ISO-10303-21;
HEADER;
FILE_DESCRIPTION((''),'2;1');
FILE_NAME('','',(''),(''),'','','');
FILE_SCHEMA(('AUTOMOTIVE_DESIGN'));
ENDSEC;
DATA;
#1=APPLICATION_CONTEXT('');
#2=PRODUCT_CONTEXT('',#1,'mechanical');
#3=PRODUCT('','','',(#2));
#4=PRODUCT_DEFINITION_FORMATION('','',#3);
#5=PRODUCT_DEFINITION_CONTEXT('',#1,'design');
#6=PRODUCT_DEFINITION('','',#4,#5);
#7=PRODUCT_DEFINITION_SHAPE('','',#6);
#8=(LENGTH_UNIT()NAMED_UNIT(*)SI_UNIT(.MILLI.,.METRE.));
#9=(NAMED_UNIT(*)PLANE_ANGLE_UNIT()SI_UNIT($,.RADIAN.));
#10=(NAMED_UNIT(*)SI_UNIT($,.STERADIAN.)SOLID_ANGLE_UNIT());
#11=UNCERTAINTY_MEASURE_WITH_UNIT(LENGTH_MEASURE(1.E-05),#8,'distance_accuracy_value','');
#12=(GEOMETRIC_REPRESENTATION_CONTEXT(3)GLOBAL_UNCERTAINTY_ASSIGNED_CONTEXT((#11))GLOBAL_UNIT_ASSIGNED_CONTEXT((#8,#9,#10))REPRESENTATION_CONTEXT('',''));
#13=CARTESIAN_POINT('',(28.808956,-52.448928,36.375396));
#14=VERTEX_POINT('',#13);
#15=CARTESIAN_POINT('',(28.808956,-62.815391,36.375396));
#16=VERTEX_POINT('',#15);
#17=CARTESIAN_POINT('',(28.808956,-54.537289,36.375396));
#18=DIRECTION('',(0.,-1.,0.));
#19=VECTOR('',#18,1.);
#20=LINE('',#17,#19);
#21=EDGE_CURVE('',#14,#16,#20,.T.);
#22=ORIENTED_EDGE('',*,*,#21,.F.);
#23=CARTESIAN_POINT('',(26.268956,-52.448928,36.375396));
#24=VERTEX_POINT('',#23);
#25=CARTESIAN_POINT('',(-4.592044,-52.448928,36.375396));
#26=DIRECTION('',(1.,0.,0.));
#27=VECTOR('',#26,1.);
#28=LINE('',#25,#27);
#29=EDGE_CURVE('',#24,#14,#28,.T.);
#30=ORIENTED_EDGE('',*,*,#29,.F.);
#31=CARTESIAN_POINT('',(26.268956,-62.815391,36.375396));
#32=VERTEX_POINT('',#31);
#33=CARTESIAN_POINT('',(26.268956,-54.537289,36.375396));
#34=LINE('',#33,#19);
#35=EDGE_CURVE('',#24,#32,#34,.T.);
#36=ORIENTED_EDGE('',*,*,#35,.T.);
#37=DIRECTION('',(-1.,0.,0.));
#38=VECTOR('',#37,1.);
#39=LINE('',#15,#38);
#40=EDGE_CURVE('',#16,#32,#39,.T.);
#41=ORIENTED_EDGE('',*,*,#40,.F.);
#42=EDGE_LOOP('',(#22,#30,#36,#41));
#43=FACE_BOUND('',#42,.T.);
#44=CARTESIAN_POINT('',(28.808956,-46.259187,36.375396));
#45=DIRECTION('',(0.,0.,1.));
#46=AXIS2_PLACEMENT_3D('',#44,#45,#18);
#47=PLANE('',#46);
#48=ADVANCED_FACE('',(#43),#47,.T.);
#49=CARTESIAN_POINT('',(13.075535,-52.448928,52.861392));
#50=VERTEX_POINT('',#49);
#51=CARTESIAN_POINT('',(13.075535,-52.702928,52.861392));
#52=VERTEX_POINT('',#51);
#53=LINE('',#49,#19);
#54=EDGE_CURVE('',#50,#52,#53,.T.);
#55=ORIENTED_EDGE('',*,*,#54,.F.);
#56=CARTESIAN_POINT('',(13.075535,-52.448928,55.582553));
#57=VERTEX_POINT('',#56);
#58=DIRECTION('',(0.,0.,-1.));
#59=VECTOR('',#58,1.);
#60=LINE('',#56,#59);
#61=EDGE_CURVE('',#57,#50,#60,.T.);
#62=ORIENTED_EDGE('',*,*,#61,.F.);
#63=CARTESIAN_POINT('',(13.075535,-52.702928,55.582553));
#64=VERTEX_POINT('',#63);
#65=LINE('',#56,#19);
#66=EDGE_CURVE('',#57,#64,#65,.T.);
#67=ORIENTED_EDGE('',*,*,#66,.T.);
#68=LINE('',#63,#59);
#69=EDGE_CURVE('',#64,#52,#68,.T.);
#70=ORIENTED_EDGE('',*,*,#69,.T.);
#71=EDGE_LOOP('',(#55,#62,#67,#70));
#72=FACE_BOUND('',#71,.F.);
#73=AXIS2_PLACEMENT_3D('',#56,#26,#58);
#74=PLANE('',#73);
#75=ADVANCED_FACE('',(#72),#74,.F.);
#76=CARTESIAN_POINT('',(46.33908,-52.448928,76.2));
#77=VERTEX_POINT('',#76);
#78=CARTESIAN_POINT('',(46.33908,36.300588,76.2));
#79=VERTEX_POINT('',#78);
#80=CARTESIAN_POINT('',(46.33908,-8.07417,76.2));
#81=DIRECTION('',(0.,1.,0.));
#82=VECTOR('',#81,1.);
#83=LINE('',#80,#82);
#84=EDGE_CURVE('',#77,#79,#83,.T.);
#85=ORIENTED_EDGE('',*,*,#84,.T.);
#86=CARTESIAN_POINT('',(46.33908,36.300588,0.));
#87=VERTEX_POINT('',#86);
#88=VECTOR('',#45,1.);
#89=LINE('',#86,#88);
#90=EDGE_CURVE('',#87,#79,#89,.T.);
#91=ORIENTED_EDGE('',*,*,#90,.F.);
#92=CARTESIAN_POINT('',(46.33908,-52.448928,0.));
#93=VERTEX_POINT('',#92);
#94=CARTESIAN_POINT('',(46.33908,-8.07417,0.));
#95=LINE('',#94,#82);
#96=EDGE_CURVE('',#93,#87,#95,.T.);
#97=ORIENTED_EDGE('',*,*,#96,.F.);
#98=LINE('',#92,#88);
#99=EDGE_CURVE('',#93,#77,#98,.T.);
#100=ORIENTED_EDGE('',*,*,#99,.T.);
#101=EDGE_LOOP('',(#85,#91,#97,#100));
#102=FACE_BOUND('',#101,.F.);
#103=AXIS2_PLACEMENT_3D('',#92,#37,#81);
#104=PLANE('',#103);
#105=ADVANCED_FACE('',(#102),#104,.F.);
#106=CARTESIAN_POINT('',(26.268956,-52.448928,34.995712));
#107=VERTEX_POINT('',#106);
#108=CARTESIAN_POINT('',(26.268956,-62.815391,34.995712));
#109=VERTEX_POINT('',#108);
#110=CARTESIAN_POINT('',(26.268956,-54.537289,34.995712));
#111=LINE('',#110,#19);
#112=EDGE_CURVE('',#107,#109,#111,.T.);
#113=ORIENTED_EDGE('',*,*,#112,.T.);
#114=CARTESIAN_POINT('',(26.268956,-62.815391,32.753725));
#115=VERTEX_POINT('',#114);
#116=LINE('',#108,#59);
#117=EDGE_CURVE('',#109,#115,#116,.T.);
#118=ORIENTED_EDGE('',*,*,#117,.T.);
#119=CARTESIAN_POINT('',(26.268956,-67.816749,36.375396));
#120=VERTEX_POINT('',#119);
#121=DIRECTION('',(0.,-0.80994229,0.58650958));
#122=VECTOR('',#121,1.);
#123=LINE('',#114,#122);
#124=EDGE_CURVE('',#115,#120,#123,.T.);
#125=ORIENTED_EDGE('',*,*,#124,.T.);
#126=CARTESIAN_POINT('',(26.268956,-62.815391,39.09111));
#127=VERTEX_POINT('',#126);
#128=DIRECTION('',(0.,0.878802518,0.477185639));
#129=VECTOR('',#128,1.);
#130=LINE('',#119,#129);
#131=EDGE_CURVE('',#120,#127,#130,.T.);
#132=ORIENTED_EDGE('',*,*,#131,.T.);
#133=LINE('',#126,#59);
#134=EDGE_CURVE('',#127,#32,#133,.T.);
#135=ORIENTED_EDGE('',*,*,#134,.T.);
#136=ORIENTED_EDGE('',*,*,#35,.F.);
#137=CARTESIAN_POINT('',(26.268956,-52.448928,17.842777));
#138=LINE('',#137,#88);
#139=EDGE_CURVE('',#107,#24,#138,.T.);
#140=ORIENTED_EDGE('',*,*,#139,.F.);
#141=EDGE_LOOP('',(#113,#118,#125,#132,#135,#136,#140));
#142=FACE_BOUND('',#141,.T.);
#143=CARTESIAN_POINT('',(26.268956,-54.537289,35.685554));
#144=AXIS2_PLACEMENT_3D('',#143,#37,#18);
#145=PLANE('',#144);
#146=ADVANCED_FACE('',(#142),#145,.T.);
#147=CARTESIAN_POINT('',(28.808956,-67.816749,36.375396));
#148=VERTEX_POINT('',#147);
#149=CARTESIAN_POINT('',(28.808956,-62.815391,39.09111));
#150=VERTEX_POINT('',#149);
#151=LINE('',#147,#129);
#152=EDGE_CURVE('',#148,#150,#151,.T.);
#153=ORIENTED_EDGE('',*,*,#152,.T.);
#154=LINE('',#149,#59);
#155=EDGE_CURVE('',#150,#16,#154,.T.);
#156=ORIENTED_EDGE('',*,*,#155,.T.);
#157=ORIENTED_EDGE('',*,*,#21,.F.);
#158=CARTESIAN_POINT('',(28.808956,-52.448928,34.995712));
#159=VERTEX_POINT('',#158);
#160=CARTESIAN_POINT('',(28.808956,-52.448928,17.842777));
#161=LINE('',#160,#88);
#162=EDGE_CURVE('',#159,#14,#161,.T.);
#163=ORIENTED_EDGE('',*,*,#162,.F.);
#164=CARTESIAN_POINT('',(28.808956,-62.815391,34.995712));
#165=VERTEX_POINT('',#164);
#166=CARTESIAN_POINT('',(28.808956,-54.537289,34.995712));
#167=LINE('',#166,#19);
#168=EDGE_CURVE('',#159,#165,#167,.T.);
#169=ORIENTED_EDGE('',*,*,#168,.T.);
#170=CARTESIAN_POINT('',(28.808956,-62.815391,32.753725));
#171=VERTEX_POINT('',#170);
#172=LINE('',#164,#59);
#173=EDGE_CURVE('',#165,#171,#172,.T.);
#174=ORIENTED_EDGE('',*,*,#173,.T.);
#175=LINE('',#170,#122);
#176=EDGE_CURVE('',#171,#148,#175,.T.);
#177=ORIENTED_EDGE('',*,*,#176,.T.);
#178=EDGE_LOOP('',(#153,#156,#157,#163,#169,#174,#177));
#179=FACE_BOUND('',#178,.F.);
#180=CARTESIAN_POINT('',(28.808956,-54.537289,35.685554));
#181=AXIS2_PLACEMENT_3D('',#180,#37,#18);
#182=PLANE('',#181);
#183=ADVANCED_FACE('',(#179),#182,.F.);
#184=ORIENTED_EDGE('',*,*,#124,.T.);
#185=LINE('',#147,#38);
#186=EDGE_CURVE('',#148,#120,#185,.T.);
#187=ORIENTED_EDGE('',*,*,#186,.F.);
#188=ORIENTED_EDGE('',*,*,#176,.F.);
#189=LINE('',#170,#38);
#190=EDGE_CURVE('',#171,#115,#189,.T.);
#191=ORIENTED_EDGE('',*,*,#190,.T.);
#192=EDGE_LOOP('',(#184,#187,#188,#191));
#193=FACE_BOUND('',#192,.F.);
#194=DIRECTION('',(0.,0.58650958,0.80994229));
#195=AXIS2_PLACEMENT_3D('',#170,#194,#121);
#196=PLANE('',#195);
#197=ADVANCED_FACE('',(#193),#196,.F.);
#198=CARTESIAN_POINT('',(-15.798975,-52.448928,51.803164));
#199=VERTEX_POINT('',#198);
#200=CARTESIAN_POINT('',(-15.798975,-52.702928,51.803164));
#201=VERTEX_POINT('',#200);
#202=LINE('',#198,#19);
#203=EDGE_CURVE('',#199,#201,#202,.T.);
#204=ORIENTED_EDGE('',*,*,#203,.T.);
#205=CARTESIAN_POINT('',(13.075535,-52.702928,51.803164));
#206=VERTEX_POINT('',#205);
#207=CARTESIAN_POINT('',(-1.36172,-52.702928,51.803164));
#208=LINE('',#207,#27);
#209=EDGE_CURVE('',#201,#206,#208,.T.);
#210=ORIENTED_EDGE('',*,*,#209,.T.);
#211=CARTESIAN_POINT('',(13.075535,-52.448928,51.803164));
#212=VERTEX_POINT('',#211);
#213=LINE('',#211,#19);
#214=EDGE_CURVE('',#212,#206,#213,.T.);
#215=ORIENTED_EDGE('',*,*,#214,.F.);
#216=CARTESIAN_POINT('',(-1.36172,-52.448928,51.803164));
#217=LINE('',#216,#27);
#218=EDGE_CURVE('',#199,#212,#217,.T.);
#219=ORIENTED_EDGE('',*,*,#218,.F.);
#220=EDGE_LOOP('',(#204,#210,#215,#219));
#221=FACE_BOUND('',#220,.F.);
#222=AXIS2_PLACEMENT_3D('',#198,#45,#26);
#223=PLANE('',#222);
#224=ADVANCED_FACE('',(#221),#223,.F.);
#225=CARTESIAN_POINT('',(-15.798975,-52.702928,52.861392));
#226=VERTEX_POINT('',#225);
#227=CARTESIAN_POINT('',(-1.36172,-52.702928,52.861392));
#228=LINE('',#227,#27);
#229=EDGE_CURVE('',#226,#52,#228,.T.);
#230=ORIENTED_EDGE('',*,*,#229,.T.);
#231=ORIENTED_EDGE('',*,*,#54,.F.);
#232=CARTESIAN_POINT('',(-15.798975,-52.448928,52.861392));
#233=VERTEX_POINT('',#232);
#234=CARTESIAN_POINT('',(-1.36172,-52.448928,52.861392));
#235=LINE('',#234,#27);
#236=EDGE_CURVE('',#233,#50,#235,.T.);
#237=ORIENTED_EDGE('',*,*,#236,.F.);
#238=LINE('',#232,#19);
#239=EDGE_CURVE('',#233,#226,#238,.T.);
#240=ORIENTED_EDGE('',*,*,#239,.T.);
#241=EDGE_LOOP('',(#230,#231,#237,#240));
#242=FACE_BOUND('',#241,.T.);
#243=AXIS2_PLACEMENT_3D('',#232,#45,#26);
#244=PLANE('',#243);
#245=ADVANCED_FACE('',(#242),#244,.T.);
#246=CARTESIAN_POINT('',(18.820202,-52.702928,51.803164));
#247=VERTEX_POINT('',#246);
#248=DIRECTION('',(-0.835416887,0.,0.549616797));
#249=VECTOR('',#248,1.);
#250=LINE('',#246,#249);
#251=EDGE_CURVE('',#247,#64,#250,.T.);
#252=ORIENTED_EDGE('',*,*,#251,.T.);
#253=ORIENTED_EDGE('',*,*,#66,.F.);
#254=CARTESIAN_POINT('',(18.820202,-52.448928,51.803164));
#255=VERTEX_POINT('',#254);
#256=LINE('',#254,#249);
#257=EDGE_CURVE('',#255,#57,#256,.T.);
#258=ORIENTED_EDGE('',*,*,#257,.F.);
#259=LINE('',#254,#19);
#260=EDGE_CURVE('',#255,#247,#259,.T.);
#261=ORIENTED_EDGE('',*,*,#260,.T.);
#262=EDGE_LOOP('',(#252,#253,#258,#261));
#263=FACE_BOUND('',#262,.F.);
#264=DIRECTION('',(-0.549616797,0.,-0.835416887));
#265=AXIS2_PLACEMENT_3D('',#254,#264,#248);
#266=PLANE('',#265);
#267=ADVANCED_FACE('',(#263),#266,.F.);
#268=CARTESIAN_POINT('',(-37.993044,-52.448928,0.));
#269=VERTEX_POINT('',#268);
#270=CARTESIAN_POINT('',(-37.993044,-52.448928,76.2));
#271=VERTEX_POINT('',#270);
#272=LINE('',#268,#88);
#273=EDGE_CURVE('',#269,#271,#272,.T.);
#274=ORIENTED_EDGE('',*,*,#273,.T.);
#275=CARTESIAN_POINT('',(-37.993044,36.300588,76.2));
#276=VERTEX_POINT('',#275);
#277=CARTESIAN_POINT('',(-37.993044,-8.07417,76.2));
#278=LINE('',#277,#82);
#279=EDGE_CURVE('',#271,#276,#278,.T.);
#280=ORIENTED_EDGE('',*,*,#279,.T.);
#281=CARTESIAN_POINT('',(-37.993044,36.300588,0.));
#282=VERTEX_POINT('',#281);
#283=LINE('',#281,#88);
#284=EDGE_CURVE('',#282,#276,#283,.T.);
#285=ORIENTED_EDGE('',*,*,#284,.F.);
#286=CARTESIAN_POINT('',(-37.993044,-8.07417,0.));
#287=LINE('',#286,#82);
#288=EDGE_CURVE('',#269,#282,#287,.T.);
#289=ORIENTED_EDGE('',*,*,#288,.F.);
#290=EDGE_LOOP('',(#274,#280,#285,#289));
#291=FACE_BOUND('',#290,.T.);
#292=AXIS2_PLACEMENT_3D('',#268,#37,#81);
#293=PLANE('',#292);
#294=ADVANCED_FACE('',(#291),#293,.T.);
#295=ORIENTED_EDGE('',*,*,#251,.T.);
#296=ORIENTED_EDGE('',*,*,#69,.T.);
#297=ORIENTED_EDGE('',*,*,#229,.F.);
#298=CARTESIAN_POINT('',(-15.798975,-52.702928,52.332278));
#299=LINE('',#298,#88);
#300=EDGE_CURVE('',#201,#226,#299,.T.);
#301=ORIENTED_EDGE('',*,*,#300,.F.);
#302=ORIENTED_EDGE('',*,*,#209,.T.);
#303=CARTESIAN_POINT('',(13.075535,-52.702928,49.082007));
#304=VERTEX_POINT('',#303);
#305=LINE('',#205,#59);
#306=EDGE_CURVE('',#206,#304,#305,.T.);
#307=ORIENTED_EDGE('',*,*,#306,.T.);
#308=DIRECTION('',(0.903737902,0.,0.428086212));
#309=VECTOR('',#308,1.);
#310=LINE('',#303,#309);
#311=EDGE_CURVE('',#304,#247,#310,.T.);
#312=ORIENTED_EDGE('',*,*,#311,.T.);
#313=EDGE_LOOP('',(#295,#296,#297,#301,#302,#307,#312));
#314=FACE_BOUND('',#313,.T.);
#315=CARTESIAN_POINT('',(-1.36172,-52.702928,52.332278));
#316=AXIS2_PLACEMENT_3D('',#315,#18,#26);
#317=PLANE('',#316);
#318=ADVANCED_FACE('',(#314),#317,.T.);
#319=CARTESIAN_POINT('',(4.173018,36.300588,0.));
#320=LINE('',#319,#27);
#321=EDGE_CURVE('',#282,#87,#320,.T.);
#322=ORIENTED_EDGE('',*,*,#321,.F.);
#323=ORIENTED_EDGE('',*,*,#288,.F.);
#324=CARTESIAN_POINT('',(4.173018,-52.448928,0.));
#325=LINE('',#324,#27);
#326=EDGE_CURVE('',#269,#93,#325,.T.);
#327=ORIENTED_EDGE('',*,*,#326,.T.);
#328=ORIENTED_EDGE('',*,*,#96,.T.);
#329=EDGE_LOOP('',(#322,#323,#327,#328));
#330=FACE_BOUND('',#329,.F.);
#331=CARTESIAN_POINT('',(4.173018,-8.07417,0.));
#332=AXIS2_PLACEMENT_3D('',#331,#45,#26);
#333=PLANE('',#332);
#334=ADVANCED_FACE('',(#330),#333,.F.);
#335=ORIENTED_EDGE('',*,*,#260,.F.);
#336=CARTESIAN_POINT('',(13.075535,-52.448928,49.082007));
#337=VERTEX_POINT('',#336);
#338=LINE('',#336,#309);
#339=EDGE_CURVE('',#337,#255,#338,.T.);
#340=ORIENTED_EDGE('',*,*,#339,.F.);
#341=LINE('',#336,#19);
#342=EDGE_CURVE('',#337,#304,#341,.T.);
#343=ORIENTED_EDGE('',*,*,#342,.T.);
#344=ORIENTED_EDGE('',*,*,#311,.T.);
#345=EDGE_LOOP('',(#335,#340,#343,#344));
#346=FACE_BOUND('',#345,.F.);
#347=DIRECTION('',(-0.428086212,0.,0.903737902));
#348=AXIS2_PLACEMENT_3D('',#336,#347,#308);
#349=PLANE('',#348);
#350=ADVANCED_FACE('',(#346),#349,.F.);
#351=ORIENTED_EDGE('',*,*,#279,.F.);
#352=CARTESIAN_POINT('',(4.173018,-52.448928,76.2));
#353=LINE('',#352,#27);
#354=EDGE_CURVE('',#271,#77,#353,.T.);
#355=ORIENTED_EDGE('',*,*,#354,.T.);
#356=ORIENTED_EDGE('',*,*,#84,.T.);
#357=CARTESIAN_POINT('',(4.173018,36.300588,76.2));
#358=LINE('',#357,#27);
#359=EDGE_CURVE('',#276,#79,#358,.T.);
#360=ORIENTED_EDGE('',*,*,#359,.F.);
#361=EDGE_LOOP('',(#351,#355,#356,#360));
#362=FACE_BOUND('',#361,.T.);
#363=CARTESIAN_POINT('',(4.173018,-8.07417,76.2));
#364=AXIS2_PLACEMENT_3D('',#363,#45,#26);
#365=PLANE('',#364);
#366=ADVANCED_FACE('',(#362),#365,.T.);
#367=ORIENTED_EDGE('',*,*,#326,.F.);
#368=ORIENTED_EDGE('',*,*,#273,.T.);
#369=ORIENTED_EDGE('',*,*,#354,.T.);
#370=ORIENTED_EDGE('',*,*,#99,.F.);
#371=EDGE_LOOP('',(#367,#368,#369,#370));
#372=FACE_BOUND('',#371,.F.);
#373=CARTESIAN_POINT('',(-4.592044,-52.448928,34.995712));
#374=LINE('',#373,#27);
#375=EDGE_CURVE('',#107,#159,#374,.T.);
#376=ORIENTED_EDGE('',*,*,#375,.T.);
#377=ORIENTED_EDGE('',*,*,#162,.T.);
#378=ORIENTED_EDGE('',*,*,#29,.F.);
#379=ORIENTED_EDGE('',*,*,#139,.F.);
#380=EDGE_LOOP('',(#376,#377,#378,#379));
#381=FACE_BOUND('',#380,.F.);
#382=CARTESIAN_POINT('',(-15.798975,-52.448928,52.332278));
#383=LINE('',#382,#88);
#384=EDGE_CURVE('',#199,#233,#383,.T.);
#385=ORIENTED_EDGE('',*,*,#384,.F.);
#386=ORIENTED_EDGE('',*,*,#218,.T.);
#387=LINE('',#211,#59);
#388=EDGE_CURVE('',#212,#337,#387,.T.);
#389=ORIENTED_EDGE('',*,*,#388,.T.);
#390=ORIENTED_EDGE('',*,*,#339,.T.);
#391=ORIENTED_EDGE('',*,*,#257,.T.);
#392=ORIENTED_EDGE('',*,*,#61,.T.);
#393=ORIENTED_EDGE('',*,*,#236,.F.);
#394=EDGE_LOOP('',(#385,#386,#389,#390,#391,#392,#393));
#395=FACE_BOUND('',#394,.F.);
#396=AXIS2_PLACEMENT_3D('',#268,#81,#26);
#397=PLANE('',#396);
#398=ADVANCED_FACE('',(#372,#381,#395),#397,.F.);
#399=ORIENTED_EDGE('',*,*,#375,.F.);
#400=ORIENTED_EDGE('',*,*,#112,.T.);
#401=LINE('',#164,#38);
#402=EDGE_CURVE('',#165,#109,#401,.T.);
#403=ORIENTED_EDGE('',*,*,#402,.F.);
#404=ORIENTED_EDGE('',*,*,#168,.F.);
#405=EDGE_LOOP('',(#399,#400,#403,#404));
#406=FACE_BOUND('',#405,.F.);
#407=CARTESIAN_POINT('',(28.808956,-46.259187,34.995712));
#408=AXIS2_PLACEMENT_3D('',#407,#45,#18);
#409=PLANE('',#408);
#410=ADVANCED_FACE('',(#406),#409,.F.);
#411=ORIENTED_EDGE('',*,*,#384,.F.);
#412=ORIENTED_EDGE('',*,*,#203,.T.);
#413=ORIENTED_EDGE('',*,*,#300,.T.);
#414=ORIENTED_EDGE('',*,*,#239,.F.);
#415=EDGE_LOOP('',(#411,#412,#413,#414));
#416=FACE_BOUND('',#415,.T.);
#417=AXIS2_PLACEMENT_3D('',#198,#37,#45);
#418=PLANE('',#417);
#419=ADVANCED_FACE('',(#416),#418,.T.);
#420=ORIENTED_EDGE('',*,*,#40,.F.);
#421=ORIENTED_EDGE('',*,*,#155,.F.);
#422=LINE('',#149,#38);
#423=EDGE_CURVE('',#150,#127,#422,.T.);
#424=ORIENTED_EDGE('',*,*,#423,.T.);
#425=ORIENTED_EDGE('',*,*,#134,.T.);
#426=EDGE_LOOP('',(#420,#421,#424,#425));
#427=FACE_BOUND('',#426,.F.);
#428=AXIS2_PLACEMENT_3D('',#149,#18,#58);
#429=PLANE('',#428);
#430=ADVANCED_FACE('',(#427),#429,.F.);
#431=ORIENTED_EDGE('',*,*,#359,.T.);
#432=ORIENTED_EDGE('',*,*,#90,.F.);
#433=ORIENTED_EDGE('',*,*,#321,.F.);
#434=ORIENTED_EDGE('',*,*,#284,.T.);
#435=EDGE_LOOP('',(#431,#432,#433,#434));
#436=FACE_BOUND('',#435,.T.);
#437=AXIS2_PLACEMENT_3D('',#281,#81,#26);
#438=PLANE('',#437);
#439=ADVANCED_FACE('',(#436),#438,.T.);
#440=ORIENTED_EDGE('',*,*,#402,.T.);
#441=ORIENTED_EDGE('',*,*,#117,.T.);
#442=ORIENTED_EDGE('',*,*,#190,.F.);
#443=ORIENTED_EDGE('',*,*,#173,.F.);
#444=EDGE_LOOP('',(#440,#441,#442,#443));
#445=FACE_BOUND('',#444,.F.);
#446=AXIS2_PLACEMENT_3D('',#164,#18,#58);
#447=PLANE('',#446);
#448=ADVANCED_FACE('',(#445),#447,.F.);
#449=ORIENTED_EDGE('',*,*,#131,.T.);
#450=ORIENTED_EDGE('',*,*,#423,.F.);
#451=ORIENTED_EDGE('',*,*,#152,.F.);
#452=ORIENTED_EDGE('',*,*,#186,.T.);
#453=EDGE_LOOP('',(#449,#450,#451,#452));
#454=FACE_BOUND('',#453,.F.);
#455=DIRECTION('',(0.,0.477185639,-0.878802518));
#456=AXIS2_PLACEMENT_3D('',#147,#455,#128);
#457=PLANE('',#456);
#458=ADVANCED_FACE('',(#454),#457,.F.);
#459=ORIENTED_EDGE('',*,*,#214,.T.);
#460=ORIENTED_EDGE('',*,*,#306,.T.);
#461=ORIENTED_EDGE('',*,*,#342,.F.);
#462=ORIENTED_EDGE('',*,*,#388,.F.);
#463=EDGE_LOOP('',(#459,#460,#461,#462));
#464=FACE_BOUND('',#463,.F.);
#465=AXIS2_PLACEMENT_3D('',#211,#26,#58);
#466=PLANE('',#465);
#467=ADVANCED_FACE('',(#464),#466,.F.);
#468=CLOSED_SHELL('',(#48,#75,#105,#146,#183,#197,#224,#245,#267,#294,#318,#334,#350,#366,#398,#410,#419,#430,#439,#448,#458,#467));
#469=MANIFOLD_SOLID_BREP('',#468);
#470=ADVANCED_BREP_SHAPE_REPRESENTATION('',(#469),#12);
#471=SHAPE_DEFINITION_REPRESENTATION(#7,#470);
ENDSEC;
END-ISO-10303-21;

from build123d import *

# Parameters (mm, degrees)
F0_W     = 84.3321233988
F0_H     = 88.7495167553
F1_DEPTH = 76.2
F4_W     = 28.8745099679
F4_H     = 1.0582283139
F5_DEPTH = 0.254
F7_W     = 16.5562033653
F7_H     = 1.3796836138
F8_DEPTH = 2.54


# Not quite as in the source:
# - the program builds the solid bodies; features that only make, move or delete a surface that nothing else refers to are left out


with BuildPart() as f1:
    # F0 (on Top) → F1 (new body)
    with BuildSketch(Plane.XY):
        with Locations((4.1730180383, -8.0741699785)):
            Rectangle(F0_W, F0_H)
    extrude(amount=F1_DEPTH)

    # F4 (on face) → F5 (join)
    with BuildSketch(Plane.XZ.offset(52.4489283562)):
        with Locations((-1.3617197983, 52.3322783411)):
            Rectangle(F4_W, F4_H)
        Polygon((13.0755351856, 55.5825531483), (13.0755351856, 52.861392498), (13.0755351856, 51.8031641841), (13.0755351856, 49.0820072591), (18.8202019781, 51.8031641841), align=None)
    extrude(amount=F5_DEPTH)

    # F7 (on offset) → F8 (join)
    with BuildSketch(Plane(origin=(28.8089563389, 0, 0), x_dir=(0, -1, 0), z_dir=(-1, 0, 0))):
        with Locations((54.5372888446, 35.6855541468)):
            Rectangle(F7_W, F7_H)
        Polygon((62.8153905272, 39.0911102295), (62.8153905272, 36.3753959537), (62.8153905272, 34.9957123399), (62.8153905272, 32.7537246048), (67.8167492151, 36.3753959537), align=None)
    extrude(amount=F8_DEPTH)


solid = f1.part
